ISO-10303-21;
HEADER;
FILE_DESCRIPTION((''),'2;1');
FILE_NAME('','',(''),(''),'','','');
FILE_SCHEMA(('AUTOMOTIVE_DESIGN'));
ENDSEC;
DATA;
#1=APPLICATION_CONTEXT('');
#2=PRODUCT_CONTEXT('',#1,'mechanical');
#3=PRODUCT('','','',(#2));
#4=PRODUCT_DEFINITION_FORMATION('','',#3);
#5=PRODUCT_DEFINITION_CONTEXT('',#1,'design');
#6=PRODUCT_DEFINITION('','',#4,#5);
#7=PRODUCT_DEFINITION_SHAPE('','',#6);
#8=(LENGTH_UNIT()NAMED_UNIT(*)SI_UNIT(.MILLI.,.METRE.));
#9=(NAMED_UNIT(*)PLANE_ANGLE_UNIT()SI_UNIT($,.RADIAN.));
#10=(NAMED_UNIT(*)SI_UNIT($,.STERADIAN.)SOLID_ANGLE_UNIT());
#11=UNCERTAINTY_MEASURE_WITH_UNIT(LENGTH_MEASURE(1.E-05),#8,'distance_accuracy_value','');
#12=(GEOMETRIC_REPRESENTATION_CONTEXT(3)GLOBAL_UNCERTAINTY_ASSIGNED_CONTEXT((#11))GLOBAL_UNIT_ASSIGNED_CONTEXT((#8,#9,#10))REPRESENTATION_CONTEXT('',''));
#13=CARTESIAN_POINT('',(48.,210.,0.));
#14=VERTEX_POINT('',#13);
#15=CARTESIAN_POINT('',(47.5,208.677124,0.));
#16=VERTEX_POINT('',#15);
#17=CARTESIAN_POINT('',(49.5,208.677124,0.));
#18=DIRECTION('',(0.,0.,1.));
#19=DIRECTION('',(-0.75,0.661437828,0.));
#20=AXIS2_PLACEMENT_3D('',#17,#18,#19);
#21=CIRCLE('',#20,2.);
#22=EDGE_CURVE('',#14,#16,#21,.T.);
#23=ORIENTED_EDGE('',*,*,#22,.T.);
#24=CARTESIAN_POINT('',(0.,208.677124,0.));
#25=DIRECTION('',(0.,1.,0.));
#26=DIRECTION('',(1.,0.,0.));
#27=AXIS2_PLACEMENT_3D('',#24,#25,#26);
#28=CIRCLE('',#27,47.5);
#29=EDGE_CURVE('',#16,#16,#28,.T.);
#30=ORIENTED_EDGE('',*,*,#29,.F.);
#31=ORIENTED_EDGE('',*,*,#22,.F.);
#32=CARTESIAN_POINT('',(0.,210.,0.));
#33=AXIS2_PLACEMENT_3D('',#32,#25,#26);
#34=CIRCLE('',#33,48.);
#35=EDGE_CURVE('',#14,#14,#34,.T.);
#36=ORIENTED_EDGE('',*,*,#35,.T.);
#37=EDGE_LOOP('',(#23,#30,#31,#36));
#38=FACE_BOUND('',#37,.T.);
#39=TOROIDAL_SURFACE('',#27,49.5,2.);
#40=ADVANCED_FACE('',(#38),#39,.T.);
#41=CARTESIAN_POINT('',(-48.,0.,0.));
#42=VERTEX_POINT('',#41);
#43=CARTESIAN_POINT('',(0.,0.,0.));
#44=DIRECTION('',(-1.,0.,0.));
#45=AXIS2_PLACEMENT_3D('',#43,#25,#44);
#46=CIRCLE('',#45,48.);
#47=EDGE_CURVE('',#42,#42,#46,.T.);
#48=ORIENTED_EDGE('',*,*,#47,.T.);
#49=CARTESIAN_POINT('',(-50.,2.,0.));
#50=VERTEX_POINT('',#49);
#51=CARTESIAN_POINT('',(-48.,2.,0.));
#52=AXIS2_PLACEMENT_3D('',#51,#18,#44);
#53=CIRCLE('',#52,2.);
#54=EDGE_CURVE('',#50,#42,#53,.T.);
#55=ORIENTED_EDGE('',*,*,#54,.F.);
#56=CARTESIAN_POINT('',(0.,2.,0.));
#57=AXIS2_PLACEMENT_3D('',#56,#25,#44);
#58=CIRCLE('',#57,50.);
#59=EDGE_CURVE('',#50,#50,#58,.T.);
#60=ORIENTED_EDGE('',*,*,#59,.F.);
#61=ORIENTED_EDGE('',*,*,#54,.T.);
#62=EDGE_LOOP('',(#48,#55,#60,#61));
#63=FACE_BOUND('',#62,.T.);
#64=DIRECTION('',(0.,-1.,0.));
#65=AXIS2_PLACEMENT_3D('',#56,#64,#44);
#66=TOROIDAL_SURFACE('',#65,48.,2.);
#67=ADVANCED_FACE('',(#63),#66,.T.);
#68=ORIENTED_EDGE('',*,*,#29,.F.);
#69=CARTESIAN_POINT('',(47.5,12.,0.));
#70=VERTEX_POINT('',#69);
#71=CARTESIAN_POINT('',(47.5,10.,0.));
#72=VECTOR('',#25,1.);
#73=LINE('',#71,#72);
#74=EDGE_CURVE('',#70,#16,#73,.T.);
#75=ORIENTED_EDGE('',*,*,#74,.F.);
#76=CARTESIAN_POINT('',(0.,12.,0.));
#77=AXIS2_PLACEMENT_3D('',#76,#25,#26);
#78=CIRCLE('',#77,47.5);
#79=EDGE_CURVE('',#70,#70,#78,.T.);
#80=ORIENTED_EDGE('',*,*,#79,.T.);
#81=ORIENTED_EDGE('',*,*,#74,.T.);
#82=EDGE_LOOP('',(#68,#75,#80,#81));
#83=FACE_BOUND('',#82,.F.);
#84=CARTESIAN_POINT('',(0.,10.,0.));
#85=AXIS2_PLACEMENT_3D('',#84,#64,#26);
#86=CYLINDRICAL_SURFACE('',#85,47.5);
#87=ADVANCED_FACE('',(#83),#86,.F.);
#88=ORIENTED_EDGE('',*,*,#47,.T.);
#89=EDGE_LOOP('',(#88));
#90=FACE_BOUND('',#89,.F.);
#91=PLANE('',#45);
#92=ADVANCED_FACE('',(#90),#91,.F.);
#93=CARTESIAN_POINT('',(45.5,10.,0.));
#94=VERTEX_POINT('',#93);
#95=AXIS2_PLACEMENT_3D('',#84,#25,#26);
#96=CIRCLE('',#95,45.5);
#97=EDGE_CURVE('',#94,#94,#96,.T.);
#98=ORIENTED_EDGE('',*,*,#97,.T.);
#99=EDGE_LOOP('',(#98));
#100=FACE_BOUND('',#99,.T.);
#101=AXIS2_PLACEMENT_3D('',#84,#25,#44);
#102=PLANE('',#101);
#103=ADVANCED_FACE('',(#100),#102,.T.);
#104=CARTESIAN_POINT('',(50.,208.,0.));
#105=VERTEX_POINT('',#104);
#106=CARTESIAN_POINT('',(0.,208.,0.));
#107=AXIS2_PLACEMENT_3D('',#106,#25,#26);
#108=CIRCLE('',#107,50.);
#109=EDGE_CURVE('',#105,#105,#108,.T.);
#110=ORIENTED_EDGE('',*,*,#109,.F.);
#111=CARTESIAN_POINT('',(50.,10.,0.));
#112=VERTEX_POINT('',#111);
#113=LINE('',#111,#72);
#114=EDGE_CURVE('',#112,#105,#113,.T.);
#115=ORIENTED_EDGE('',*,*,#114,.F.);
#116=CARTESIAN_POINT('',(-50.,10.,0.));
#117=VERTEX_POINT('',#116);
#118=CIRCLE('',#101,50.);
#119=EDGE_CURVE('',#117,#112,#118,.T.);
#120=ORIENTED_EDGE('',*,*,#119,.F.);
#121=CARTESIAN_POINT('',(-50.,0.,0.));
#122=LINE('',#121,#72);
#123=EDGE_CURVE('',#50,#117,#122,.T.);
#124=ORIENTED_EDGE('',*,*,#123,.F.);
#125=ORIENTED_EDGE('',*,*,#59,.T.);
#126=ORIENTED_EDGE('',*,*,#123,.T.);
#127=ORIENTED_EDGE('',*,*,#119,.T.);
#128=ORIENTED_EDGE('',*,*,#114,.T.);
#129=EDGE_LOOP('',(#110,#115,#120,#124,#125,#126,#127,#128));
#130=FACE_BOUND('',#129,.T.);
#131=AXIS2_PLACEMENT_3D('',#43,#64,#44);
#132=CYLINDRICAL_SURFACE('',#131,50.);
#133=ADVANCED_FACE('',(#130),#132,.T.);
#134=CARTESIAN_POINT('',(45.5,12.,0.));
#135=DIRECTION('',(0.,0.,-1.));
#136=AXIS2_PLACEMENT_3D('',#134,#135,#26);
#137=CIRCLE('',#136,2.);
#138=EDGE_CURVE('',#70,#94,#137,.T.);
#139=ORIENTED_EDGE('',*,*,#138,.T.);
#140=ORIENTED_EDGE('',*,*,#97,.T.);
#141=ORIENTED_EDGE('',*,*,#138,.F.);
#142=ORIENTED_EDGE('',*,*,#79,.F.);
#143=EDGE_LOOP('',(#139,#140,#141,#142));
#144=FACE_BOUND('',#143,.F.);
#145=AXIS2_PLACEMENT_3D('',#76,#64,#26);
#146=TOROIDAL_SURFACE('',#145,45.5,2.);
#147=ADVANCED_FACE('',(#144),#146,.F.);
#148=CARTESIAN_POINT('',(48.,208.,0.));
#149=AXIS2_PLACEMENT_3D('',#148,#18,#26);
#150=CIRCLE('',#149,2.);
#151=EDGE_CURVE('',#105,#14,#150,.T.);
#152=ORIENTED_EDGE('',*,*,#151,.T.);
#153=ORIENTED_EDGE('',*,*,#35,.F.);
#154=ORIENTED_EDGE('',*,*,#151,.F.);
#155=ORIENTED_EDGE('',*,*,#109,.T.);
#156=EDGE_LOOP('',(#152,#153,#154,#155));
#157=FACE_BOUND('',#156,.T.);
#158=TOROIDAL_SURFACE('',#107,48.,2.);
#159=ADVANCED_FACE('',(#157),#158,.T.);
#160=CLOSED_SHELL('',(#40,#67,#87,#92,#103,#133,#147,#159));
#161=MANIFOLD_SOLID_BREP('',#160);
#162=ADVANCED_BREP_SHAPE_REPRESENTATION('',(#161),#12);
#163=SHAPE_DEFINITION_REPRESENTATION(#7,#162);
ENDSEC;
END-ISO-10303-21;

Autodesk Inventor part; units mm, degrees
ref_plane "YZ Plane" through (0, 0, 0) normal (1, 0, 0) x (0, 1, 0)
ref_plane "XZ Plane" through (0, 0, 0) normal (0, 1, 0) x (-1, 0, 0)
ref_plane "XY Plane" through (0, 0, 0) normal (0, 0, 1) x (1, 0, 0)
sketch "Sketch2" plane through (0, 0, 0) normal (0, 1, 0) x (-1, 0, 0)
  circle A0 centre (0, 0) radius 50
  dimension "d4" = 100
extrude "Extrusion2" add sketch "Sketch2" along normal blind 10
sketch "Sketch3" plane through (0, 10, 0) normal (0, 1, 0) x (1, 0, 0)
  circle A0 centre (0, 0) radius 50
  circle A1 centre (0, 0) radius 47.5
  dimension "d7" = 100
  dimension "d8" = 95
extrude "Extrusion3" add sketch "Sketch3" along normal blind 200
fillet "Fillet1" radius 2 1 edges at (50, 0, 0)
fillet "Fillet2" radius 2 2 edges at (-50, 210, 0) (-47.5, 210, 0)
fillet "Fillet3" radius 2 1 edges at (-47.5, 10, 0)
properties part number "glass" material "Glass"
